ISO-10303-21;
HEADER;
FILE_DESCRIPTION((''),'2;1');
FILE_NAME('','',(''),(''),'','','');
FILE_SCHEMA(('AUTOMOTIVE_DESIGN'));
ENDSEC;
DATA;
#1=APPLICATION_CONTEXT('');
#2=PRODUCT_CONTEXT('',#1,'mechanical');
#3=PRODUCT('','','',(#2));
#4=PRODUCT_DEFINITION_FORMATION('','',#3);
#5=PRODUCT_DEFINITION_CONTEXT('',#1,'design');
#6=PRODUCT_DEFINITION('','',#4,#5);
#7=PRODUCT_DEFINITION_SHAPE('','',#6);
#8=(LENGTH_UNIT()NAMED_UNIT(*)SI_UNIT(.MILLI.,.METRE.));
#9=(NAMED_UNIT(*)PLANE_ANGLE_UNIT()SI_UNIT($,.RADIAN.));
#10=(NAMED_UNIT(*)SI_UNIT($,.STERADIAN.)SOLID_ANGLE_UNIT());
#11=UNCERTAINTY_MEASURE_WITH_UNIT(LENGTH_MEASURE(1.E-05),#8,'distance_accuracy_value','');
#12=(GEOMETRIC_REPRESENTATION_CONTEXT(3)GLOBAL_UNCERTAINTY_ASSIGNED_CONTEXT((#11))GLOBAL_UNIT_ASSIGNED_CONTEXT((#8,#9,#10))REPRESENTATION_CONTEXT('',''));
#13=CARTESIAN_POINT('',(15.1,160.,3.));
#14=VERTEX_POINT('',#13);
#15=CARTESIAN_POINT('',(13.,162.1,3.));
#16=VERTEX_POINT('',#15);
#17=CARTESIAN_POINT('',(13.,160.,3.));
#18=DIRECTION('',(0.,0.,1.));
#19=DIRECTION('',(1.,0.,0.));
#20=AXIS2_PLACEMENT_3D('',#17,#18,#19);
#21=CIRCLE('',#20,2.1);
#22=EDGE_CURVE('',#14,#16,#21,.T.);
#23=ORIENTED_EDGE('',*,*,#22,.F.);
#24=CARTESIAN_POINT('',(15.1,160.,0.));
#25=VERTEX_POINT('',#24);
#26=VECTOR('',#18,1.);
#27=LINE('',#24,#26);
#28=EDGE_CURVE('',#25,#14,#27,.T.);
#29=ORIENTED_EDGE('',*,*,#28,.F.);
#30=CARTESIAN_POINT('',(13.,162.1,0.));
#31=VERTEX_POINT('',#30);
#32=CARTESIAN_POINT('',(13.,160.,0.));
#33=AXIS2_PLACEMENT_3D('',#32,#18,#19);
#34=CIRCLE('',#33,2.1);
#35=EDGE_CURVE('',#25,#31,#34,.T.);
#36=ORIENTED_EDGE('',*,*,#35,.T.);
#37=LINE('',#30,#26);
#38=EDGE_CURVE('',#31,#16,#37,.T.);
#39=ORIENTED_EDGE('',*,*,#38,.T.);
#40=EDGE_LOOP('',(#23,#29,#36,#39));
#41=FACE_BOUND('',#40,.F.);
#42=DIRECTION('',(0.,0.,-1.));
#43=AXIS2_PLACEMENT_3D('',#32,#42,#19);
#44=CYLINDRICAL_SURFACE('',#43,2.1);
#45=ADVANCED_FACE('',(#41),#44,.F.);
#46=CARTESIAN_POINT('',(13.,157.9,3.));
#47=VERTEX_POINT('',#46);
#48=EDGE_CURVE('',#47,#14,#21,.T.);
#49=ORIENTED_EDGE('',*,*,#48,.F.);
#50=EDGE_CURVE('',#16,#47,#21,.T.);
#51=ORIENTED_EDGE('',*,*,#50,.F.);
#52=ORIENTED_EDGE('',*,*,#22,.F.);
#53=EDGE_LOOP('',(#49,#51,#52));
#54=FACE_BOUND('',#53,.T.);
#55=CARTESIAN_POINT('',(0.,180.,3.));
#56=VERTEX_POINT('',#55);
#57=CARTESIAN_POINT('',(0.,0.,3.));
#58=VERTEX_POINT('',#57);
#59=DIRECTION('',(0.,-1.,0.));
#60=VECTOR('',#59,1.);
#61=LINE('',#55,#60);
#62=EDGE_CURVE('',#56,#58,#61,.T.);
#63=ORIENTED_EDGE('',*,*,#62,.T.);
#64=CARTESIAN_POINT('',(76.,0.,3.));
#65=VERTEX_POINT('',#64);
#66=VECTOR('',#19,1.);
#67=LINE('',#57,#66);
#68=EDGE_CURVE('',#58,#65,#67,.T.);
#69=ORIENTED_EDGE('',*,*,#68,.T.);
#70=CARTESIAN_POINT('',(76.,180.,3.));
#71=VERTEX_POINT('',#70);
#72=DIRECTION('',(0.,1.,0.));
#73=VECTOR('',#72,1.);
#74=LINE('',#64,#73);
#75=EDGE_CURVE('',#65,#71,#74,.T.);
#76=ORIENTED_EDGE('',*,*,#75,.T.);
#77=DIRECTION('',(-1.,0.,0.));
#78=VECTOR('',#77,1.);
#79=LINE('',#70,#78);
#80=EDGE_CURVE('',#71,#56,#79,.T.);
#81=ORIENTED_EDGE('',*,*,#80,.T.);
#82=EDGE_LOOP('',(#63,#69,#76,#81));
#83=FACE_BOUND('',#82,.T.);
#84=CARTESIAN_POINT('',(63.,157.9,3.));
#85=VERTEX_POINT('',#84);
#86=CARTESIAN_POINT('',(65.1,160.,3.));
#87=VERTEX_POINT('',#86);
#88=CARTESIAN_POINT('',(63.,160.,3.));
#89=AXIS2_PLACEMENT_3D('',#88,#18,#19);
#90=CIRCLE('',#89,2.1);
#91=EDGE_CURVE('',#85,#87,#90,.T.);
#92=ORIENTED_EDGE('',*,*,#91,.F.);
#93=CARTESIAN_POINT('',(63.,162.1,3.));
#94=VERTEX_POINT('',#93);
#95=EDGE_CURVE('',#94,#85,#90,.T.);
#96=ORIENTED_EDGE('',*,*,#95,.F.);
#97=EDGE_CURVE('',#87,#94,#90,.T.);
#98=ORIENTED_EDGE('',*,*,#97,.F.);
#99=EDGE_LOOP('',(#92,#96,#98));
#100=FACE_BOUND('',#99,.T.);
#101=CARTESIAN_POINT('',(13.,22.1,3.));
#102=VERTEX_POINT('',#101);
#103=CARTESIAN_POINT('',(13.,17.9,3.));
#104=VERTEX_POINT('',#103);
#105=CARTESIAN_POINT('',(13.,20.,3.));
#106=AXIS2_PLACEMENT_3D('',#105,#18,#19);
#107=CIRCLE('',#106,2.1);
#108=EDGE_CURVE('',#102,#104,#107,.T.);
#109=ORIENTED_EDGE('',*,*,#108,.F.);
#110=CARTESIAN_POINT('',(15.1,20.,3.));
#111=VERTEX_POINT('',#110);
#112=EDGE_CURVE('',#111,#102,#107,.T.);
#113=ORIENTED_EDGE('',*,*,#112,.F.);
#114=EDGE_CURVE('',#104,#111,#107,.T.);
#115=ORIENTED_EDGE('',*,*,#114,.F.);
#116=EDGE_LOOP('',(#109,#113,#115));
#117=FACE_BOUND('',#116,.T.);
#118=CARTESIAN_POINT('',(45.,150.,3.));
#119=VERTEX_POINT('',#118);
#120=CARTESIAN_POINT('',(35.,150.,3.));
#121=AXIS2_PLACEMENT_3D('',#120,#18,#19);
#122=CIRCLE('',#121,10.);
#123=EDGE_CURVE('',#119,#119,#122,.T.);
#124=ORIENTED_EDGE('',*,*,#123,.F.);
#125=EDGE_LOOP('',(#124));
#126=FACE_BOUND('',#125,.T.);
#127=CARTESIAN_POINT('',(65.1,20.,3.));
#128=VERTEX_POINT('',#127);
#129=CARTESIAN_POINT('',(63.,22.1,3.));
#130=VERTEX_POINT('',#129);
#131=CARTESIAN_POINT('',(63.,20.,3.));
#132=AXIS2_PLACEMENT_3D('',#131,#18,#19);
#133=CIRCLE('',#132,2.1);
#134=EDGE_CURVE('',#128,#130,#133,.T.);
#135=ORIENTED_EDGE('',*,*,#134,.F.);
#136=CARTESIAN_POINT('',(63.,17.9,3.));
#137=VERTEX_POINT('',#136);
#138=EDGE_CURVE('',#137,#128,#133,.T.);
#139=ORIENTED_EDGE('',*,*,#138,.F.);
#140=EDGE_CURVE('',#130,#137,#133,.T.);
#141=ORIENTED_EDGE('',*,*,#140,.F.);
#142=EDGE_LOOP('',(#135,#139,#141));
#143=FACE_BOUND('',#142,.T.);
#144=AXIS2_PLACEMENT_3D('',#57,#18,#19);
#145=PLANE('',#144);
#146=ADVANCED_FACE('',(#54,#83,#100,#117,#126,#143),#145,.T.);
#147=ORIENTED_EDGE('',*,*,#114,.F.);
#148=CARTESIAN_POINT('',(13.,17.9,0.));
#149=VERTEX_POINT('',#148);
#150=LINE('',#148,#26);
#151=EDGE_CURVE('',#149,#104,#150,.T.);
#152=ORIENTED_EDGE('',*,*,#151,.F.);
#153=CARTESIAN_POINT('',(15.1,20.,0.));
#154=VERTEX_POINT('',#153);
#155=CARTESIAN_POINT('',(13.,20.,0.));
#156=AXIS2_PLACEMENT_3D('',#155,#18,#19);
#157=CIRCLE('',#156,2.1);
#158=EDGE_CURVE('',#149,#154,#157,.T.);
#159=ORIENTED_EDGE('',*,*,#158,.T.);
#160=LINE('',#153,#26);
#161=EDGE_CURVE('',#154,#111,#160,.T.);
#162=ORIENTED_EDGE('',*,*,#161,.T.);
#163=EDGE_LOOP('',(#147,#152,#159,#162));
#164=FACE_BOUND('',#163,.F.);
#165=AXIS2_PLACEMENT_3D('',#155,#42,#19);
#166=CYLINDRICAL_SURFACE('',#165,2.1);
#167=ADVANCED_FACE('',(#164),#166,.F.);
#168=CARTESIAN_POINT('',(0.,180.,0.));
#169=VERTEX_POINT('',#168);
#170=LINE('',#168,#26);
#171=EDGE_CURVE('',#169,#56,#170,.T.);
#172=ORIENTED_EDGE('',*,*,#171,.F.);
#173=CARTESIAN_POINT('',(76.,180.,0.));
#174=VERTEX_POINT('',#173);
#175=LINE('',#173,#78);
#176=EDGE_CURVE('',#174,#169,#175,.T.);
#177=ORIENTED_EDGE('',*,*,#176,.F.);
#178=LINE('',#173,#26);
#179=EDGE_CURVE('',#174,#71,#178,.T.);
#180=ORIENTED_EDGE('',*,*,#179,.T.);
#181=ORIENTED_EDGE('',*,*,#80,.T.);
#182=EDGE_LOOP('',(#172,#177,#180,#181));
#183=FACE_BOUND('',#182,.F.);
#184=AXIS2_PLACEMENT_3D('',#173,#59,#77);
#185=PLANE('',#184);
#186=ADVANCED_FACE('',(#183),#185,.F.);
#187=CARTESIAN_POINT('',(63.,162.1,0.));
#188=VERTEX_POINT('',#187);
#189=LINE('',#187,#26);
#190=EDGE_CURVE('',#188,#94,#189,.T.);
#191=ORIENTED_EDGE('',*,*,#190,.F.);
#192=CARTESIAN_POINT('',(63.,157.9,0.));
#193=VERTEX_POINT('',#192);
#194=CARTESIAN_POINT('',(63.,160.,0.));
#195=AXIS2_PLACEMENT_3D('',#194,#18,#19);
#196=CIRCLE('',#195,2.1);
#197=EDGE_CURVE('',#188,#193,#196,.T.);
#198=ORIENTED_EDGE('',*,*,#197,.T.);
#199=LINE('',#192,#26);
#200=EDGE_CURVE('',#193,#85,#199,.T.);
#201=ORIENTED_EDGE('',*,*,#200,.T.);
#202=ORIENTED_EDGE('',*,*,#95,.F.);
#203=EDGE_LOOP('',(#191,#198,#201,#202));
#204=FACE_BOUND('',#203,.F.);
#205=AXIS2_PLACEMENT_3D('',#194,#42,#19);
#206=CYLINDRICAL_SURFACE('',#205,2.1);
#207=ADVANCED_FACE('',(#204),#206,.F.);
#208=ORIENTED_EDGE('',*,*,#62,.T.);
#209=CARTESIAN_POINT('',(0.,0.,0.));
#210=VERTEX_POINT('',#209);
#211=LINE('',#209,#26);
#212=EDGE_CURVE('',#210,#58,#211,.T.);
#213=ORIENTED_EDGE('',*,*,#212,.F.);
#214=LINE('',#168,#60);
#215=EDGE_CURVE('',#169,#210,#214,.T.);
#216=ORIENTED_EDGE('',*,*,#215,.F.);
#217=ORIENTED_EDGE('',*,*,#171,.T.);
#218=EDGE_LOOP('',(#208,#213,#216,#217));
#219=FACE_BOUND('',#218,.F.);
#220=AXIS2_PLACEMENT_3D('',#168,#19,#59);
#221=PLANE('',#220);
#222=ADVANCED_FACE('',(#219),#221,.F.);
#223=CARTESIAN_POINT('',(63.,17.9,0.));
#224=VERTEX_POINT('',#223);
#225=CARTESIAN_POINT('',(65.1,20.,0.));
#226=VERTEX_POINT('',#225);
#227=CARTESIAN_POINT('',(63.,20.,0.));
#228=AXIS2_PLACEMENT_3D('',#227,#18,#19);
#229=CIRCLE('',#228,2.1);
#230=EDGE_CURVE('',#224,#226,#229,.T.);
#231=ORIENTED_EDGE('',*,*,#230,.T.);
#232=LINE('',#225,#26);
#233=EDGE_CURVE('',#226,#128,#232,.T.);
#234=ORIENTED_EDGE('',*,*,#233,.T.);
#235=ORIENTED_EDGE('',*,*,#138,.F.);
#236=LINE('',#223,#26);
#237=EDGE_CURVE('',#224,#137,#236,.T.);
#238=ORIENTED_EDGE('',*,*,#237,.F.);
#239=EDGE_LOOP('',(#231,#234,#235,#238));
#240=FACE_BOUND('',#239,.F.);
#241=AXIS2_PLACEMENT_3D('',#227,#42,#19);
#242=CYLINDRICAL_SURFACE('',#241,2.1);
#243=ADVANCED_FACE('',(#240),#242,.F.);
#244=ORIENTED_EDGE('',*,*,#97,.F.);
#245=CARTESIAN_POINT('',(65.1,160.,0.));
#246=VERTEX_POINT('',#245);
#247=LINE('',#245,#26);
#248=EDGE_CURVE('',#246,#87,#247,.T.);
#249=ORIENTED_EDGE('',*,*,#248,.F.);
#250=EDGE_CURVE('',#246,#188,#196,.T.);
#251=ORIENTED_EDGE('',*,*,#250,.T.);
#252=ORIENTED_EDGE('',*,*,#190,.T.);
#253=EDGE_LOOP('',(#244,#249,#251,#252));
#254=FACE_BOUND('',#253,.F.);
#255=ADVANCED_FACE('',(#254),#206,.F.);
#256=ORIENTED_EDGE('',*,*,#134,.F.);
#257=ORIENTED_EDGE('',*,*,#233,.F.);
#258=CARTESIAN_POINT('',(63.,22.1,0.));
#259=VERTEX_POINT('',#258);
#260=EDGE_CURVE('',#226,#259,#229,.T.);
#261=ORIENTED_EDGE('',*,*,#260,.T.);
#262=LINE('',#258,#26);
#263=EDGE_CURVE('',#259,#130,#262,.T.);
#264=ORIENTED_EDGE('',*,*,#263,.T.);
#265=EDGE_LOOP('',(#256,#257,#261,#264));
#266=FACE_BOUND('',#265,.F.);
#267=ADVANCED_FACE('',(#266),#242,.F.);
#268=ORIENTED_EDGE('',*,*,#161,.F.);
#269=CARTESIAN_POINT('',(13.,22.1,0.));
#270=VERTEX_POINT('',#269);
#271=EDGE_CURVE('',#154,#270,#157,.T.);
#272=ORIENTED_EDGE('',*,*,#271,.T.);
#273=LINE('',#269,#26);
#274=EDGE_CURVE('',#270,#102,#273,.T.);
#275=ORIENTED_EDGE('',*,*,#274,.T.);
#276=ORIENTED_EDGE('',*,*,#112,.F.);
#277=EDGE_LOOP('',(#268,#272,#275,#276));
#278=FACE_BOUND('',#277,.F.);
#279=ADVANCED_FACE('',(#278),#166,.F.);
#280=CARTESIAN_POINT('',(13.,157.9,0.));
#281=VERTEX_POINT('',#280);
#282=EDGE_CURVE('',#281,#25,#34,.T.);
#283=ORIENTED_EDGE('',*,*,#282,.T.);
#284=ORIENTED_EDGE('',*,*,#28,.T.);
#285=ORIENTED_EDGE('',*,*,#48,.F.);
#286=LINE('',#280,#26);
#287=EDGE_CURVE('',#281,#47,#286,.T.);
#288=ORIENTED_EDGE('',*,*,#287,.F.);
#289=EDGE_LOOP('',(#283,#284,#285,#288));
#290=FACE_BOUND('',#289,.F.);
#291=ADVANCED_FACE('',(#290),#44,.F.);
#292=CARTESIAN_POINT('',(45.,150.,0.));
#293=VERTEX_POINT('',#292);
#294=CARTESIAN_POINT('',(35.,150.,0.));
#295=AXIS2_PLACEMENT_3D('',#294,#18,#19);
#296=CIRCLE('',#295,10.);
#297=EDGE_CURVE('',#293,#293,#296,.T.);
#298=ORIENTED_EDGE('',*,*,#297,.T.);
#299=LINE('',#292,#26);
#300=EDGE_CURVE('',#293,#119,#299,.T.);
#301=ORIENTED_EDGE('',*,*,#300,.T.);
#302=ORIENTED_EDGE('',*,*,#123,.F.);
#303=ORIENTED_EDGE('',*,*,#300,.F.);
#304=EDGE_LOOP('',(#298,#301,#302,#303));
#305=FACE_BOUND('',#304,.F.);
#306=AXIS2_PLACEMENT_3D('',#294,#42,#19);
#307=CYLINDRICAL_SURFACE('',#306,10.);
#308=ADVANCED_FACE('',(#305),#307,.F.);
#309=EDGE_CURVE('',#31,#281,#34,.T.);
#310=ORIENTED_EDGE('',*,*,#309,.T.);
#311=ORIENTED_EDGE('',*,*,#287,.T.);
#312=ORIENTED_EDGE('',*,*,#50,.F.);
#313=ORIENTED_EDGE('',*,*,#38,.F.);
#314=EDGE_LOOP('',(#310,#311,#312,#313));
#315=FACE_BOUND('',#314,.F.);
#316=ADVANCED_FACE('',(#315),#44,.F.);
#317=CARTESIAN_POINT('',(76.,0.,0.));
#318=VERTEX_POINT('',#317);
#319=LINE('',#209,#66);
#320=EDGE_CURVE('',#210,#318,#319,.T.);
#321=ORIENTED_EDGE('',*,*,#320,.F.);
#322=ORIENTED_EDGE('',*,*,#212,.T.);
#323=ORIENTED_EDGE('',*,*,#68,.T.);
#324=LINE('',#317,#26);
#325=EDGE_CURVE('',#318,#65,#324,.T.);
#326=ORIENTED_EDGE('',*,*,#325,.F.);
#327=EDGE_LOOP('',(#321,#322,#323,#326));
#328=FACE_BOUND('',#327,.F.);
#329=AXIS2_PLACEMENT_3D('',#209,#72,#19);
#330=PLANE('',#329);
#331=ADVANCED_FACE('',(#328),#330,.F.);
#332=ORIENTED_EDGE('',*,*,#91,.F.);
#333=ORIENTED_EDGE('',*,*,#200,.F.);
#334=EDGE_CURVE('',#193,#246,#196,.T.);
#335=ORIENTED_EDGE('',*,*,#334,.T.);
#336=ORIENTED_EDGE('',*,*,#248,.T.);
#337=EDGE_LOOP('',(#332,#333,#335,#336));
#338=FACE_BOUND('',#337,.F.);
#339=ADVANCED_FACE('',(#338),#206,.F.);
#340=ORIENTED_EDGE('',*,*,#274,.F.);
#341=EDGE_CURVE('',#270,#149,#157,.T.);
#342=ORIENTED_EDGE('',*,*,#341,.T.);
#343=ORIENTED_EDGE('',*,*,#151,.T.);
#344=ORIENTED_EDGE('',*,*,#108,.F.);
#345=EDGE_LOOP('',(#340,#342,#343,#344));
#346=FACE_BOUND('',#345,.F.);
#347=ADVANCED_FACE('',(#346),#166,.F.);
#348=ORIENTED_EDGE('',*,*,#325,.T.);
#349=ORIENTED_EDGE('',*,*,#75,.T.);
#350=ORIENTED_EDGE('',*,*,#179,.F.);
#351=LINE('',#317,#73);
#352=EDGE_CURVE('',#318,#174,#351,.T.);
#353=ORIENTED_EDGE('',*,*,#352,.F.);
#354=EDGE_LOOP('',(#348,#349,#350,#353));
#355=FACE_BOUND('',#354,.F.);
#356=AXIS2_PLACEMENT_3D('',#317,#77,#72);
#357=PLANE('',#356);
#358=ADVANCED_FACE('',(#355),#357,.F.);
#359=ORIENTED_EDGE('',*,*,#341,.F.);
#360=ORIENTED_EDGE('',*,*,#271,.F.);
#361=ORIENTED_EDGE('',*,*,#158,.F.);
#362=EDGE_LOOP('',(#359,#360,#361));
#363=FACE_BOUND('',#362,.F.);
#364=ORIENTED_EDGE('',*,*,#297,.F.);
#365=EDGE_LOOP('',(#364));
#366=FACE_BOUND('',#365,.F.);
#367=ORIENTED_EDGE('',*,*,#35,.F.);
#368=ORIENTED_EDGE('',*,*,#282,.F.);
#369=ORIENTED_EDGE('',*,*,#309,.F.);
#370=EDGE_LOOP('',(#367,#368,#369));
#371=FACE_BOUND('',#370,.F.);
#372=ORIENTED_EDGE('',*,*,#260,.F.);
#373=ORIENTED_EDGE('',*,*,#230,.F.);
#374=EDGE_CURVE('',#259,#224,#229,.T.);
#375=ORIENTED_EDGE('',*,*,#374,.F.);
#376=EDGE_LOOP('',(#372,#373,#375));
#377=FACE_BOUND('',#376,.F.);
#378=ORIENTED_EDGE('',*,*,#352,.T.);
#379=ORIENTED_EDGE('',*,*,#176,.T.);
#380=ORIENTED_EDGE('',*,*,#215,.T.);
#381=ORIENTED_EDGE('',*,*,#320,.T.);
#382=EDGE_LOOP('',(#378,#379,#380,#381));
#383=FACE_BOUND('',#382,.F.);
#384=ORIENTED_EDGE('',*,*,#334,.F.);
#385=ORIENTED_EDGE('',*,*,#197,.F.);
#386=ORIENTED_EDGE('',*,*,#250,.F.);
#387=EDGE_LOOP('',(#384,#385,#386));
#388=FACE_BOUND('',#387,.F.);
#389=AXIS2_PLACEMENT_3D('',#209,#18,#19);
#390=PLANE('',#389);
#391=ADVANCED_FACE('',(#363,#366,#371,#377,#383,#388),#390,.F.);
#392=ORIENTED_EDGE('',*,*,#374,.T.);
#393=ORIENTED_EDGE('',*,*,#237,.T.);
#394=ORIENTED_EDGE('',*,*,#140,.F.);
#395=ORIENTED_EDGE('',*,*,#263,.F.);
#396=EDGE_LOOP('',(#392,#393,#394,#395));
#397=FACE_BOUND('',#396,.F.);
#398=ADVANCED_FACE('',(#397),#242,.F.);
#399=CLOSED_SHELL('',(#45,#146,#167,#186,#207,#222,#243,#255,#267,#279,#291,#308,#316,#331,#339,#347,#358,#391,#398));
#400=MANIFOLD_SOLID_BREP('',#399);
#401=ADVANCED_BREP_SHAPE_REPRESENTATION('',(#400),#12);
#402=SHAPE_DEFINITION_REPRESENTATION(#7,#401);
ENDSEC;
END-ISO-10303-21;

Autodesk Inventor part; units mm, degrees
ref_plane "YZ Plane" through (0, 0, 0) normal (1, 0, 0) x (0, 1, 0)
ref_plane "XZ Plane" through (0, 0, 0) normal (0, 1, 0) x (-1, 0, 0)
ref_plane "XY Plane" through (0, 0, 0) normal (0, 0, 1) x (1, 0, 0)
sketch "Sketch1" plane through (0, 0, 0) normal (0, 0, 1) x (1, 0, 0)
  line L0 (76, 0) -> (76, 180)
  line L1 (0, 180) -> (0, 0)
  line L2 (76, 180) -> (0, 180)
  circle A0 centre (35, 150) radius 10
  line L3 (0, 0) -> (76, 0)
  line L4 (13, 169.7925) -> (13, 8.2181)
  line L5 (63, 169.7925) -> (63, 4.1511)
  circle A1 centre (13, 160) radius 2.1
  circle A2 centre (63, 160) radius 2.1
  circle A3 centre (13, 20) radius 2.1
  circle A4 centre (63, 20) radius 2.1
  point P0 (63, 22.1)
  point P1 (63, 17.9)
  point P2 (13, 22.1)
  point P3 (13, 17.9)
  point P4 (63, 162.1)
  point P5 (63, 157.9)
  point P6 (13, 162.1)
  point P7 (13, 157.9)
  dimension "d1" = 180
  dimension "d26" = 20
  dimension "d27" = 35
  dimension "d28" = 30
  dimension "d29" = 180
  dimension "d30" = 13
  dimension "d31" = 13
  dimension "d32" = 4.2
  dimension "d33" = 4.2
  dimension "d34" = 20
  dimension "d35" = 20
  dimension "d36" = 4.2
  dimension "d37" = 4.2
  dimension "d38" = 20
  dimension "d39" = 20
  dimension "d40" = 76
extrude "Extrusion1" add sketch "Sketch1" along normal blind 3
equation "\"d27\" = 0.5 * d0"
equation "\"d31\" = d30"
equation "\"d33\" = d32"
equation "\"d35\" = d34"
equation "\"d36\" = d33"
equation "\"d37\" = d36"
equation "\"d38\" = d39"
equation "\"d0\" = 70"
properties part number "BaseC_4" material "PMMA Plastic"
